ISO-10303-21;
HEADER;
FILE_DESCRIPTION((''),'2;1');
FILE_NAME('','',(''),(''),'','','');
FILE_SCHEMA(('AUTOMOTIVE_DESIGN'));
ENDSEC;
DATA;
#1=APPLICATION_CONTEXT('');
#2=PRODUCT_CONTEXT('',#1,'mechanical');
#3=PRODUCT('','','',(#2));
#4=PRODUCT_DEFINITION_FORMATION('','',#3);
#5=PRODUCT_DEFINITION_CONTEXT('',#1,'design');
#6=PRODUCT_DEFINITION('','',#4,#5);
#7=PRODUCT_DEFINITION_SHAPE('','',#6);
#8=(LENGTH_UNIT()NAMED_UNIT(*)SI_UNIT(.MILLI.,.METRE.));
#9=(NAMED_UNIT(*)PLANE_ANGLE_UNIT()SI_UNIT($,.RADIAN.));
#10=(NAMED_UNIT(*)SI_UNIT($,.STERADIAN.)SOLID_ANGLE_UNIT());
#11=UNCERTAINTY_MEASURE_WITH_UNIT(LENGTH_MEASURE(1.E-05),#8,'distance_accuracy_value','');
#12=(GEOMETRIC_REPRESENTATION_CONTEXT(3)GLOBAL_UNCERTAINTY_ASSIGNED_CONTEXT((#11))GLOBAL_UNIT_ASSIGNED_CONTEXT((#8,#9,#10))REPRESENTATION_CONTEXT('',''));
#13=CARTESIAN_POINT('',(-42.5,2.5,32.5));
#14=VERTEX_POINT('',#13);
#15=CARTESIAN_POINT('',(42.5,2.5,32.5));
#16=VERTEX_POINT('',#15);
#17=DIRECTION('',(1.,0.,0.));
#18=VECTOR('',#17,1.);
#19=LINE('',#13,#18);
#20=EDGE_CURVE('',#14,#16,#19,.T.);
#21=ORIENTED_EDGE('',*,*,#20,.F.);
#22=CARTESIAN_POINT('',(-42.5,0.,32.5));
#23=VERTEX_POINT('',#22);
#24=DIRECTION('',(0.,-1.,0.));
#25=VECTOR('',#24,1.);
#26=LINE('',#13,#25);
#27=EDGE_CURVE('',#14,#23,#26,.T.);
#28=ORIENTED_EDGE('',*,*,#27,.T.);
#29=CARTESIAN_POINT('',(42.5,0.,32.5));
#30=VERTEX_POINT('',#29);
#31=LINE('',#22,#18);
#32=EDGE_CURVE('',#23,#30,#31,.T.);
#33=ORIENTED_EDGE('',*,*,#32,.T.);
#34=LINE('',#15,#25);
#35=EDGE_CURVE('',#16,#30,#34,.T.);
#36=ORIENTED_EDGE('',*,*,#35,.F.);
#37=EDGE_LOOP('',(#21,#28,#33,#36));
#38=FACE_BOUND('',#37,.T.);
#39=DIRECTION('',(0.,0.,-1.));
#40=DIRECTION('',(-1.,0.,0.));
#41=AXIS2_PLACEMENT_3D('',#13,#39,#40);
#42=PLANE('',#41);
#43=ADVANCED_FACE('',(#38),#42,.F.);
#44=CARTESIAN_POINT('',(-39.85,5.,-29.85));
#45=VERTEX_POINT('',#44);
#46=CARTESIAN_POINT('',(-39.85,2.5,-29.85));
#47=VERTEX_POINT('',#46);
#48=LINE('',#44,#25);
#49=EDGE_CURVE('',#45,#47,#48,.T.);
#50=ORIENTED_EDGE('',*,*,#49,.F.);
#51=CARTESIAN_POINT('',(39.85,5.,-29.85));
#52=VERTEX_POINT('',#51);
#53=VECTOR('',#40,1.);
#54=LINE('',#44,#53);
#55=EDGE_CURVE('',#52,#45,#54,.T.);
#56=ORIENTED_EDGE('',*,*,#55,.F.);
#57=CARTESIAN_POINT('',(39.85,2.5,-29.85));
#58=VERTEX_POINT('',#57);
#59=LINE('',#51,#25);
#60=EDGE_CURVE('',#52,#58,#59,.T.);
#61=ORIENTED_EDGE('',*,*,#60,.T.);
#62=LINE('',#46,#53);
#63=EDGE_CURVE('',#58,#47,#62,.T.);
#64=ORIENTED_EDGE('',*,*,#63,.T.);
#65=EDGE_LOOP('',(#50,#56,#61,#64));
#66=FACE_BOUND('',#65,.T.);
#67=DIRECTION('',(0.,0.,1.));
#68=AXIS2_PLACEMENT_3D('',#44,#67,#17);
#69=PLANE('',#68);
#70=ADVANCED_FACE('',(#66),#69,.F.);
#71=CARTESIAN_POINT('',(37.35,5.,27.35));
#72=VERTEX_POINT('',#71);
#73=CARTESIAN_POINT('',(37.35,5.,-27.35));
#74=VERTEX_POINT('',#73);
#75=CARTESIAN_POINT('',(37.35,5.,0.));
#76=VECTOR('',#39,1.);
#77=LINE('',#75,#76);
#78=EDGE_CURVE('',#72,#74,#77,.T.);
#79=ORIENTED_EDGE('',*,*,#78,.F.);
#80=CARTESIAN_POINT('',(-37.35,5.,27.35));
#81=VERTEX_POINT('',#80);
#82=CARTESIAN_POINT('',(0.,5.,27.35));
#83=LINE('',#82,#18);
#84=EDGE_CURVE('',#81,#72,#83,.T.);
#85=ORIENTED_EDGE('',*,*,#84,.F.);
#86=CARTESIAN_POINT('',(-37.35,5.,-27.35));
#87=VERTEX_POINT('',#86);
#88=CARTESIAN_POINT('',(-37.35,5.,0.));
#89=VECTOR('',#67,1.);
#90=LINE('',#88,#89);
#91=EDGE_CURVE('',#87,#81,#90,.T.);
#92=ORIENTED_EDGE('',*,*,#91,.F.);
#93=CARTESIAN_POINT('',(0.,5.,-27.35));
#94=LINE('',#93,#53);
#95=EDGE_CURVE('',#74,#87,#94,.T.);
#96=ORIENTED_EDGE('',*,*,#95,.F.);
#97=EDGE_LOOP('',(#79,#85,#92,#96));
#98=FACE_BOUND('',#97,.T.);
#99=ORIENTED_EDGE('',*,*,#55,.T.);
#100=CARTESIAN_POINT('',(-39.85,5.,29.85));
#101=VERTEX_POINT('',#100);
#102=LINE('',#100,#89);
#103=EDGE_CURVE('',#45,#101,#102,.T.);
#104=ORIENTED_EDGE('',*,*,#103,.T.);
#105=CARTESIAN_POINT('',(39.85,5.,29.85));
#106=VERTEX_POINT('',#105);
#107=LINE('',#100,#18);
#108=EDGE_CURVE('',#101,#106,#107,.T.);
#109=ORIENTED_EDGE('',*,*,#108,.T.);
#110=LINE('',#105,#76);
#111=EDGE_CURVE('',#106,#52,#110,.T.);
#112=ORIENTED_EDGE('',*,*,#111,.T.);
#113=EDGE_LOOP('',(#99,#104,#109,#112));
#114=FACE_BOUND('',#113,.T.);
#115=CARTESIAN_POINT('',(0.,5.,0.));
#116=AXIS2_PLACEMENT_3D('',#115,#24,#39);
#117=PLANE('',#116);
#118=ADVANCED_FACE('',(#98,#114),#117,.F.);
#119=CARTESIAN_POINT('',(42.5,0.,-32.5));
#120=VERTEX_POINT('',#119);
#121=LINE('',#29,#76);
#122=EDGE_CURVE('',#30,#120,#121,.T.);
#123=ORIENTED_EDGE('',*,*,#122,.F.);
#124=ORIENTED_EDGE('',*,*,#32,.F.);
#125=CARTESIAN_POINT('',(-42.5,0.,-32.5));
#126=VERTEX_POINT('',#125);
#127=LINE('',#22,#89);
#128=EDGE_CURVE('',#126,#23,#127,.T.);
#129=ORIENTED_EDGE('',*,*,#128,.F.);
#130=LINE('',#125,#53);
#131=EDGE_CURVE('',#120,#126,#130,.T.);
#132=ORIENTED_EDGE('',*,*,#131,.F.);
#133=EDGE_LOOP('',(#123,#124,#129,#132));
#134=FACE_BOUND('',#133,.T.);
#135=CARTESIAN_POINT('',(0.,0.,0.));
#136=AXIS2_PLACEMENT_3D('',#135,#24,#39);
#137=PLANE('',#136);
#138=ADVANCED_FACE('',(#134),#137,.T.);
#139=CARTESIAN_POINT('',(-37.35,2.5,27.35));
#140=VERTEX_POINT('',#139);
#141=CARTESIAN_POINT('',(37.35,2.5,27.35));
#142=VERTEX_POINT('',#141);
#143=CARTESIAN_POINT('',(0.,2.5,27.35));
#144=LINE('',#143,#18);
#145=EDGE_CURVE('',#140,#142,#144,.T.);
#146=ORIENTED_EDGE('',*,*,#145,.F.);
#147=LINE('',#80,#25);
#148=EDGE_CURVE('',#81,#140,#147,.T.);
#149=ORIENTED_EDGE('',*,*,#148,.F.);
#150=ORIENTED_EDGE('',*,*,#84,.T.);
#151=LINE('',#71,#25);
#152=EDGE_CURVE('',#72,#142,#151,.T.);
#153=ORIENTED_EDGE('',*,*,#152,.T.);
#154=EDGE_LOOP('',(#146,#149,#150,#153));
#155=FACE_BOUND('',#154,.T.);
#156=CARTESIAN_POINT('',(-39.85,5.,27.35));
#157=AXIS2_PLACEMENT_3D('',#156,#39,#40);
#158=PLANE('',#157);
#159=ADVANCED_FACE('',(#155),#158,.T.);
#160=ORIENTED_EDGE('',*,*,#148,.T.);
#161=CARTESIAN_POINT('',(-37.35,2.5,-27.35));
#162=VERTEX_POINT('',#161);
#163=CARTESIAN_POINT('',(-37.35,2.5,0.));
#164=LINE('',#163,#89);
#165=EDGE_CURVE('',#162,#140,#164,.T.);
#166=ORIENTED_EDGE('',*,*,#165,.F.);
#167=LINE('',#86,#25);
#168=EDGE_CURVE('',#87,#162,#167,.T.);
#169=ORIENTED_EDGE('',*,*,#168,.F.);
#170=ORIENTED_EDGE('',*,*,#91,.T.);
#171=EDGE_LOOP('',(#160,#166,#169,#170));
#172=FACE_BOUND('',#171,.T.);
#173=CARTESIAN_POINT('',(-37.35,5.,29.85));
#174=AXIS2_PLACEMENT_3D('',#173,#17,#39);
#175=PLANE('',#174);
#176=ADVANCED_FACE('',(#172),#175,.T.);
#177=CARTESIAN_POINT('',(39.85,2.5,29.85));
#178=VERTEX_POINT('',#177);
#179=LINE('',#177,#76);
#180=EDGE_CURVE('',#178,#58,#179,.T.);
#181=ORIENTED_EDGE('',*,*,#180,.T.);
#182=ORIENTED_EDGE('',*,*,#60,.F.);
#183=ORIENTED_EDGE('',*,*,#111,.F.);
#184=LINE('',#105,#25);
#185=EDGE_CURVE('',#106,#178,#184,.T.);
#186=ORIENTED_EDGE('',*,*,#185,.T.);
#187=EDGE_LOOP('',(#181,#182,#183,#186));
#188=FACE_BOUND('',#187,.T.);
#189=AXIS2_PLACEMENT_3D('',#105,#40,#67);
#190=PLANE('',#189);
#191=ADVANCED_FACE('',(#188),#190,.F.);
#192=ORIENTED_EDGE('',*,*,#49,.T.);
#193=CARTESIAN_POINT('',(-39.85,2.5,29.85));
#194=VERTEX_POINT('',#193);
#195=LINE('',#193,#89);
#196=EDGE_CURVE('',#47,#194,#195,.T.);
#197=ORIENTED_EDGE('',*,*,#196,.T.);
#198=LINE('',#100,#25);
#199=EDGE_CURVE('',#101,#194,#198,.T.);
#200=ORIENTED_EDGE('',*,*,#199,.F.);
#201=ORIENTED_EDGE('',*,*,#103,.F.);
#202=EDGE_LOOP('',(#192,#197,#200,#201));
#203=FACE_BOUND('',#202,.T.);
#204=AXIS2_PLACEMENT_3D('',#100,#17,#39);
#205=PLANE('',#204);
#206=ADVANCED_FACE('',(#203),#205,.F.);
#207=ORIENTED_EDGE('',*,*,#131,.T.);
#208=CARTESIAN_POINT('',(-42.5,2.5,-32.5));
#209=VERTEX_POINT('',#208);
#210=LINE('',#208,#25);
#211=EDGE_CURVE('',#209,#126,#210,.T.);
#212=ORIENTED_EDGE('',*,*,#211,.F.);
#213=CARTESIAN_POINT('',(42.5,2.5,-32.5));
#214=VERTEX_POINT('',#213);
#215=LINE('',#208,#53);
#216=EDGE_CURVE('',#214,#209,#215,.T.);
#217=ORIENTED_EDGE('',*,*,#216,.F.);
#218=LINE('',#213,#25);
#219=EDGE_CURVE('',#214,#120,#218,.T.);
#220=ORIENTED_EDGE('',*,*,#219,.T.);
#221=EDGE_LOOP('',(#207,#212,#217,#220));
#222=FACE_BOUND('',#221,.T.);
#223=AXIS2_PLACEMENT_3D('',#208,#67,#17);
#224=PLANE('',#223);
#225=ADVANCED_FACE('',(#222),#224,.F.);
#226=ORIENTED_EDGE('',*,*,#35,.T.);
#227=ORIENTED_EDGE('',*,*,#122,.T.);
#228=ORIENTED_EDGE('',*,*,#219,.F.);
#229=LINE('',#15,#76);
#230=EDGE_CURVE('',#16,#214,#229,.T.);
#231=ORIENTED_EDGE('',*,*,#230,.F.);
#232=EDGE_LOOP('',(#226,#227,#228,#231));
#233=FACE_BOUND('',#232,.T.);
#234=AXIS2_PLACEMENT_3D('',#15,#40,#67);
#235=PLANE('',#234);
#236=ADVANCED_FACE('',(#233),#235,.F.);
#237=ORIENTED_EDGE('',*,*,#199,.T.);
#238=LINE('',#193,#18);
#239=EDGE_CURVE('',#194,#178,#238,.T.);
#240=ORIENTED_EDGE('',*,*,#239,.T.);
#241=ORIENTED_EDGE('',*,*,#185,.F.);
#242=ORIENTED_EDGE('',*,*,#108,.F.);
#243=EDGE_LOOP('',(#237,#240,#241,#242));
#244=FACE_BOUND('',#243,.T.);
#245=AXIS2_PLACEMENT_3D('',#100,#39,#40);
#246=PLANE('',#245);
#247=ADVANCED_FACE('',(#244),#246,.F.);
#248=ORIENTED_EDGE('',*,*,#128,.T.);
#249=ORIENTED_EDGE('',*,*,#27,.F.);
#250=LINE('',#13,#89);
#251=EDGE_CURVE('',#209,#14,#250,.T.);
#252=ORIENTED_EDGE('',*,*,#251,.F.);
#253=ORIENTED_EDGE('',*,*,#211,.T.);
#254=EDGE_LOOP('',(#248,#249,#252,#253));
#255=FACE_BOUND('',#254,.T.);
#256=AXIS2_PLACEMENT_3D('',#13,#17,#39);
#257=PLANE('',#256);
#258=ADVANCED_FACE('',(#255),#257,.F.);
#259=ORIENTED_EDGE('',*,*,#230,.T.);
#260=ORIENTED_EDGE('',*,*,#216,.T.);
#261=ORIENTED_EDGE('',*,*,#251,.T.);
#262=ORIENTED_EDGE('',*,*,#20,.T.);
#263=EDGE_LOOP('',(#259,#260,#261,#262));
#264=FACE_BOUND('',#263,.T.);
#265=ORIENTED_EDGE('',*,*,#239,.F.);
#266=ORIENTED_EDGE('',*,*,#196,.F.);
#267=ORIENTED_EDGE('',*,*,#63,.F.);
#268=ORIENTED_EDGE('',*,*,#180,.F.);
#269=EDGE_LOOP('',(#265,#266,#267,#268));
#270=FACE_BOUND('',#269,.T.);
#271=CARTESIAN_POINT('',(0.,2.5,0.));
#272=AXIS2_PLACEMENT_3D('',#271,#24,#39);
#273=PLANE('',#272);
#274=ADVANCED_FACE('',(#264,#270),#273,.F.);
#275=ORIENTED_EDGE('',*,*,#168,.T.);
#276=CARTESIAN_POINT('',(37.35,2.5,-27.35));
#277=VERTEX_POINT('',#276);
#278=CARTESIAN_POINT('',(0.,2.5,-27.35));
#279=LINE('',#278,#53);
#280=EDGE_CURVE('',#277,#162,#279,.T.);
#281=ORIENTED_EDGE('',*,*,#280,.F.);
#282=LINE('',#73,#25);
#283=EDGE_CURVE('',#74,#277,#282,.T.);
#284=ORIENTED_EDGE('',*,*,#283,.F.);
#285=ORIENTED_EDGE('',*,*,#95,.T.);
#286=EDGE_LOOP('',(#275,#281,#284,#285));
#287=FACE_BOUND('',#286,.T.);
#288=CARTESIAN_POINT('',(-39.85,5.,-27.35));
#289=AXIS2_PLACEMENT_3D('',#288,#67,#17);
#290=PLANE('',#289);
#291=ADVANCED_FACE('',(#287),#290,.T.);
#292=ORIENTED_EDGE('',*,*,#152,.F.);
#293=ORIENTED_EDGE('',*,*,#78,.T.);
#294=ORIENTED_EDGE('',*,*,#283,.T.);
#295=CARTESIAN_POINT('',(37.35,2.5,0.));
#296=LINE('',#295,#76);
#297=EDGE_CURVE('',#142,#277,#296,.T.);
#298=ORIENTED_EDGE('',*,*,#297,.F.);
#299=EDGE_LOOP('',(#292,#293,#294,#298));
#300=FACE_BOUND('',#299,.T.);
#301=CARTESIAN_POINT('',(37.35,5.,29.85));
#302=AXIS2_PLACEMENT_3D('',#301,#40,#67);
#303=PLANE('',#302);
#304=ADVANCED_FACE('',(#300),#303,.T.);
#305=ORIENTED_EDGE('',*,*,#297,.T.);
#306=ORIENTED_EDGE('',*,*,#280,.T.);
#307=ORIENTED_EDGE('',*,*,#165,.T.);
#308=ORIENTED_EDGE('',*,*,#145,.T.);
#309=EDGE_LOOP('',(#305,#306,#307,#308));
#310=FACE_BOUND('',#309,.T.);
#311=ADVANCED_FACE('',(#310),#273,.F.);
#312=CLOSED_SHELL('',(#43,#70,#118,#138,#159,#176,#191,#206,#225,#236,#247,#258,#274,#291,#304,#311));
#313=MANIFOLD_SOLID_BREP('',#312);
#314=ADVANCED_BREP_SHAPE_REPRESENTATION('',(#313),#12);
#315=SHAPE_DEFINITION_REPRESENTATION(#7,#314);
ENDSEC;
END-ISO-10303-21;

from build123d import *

# Parameters (mm, degrees)
SKETCH_1_W        = 85
SKETCH_1_H        = 65
EXTRUDE_1_DEPTH   = 2.5
SKETCH_3_W        = 79.7
SKETCH_3_H        = 59.7
EXTRUDE_2_DEPTH   = 2.5
SHELL_START       = 2.5
SHELL_1_OUTLINE_W = 74.7
SHELL_1_OUTLINE_H = 54.7
SHELL_1_DEPTH     = 2.5


# Read off the part's stored shape, not the designer's step: 抽壳1
with BuildPart() as part:
    # 草图1 → 凸台-拉伸1 (new body)
    with BuildSketch(Plane(origin=(0, 0, 0), x_dir=(1, 0, 0), z_dir=(0, 1, 0))):
        Rectangle(SKETCH_1_W, SKETCH_1_H)
    extrude(amount=EXTRUDE_1_DEPTH)

    # 草图3 → 凸台-拉伸2 (add)
    with BuildSketch(Plane(origin=(0, 2.5, 0), x_dir=(1, 0, 0), z_dir=(0, 1, 0))):
        Rectangle(SKETCH_3_W, SKETCH_3_H)
    extrude(amount=EXTRUDE_2_DEPTH)

    # 抽壳1 outline → 抽壳1 (cut)
    with BuildSketch(Plane(origin=(0, 0, 0), x_dir=(1, 0, 0), z_dir=(0, 1, 0)).offset(SHELL_START)):
        Rectangle(SHELL_1_OUTLINE_W, SHELL_1_OUTLINE_H)
    extrude(amount=SHELL_1_DEPTH, mode=Mode.SUBTRACT)


solid = part.part
